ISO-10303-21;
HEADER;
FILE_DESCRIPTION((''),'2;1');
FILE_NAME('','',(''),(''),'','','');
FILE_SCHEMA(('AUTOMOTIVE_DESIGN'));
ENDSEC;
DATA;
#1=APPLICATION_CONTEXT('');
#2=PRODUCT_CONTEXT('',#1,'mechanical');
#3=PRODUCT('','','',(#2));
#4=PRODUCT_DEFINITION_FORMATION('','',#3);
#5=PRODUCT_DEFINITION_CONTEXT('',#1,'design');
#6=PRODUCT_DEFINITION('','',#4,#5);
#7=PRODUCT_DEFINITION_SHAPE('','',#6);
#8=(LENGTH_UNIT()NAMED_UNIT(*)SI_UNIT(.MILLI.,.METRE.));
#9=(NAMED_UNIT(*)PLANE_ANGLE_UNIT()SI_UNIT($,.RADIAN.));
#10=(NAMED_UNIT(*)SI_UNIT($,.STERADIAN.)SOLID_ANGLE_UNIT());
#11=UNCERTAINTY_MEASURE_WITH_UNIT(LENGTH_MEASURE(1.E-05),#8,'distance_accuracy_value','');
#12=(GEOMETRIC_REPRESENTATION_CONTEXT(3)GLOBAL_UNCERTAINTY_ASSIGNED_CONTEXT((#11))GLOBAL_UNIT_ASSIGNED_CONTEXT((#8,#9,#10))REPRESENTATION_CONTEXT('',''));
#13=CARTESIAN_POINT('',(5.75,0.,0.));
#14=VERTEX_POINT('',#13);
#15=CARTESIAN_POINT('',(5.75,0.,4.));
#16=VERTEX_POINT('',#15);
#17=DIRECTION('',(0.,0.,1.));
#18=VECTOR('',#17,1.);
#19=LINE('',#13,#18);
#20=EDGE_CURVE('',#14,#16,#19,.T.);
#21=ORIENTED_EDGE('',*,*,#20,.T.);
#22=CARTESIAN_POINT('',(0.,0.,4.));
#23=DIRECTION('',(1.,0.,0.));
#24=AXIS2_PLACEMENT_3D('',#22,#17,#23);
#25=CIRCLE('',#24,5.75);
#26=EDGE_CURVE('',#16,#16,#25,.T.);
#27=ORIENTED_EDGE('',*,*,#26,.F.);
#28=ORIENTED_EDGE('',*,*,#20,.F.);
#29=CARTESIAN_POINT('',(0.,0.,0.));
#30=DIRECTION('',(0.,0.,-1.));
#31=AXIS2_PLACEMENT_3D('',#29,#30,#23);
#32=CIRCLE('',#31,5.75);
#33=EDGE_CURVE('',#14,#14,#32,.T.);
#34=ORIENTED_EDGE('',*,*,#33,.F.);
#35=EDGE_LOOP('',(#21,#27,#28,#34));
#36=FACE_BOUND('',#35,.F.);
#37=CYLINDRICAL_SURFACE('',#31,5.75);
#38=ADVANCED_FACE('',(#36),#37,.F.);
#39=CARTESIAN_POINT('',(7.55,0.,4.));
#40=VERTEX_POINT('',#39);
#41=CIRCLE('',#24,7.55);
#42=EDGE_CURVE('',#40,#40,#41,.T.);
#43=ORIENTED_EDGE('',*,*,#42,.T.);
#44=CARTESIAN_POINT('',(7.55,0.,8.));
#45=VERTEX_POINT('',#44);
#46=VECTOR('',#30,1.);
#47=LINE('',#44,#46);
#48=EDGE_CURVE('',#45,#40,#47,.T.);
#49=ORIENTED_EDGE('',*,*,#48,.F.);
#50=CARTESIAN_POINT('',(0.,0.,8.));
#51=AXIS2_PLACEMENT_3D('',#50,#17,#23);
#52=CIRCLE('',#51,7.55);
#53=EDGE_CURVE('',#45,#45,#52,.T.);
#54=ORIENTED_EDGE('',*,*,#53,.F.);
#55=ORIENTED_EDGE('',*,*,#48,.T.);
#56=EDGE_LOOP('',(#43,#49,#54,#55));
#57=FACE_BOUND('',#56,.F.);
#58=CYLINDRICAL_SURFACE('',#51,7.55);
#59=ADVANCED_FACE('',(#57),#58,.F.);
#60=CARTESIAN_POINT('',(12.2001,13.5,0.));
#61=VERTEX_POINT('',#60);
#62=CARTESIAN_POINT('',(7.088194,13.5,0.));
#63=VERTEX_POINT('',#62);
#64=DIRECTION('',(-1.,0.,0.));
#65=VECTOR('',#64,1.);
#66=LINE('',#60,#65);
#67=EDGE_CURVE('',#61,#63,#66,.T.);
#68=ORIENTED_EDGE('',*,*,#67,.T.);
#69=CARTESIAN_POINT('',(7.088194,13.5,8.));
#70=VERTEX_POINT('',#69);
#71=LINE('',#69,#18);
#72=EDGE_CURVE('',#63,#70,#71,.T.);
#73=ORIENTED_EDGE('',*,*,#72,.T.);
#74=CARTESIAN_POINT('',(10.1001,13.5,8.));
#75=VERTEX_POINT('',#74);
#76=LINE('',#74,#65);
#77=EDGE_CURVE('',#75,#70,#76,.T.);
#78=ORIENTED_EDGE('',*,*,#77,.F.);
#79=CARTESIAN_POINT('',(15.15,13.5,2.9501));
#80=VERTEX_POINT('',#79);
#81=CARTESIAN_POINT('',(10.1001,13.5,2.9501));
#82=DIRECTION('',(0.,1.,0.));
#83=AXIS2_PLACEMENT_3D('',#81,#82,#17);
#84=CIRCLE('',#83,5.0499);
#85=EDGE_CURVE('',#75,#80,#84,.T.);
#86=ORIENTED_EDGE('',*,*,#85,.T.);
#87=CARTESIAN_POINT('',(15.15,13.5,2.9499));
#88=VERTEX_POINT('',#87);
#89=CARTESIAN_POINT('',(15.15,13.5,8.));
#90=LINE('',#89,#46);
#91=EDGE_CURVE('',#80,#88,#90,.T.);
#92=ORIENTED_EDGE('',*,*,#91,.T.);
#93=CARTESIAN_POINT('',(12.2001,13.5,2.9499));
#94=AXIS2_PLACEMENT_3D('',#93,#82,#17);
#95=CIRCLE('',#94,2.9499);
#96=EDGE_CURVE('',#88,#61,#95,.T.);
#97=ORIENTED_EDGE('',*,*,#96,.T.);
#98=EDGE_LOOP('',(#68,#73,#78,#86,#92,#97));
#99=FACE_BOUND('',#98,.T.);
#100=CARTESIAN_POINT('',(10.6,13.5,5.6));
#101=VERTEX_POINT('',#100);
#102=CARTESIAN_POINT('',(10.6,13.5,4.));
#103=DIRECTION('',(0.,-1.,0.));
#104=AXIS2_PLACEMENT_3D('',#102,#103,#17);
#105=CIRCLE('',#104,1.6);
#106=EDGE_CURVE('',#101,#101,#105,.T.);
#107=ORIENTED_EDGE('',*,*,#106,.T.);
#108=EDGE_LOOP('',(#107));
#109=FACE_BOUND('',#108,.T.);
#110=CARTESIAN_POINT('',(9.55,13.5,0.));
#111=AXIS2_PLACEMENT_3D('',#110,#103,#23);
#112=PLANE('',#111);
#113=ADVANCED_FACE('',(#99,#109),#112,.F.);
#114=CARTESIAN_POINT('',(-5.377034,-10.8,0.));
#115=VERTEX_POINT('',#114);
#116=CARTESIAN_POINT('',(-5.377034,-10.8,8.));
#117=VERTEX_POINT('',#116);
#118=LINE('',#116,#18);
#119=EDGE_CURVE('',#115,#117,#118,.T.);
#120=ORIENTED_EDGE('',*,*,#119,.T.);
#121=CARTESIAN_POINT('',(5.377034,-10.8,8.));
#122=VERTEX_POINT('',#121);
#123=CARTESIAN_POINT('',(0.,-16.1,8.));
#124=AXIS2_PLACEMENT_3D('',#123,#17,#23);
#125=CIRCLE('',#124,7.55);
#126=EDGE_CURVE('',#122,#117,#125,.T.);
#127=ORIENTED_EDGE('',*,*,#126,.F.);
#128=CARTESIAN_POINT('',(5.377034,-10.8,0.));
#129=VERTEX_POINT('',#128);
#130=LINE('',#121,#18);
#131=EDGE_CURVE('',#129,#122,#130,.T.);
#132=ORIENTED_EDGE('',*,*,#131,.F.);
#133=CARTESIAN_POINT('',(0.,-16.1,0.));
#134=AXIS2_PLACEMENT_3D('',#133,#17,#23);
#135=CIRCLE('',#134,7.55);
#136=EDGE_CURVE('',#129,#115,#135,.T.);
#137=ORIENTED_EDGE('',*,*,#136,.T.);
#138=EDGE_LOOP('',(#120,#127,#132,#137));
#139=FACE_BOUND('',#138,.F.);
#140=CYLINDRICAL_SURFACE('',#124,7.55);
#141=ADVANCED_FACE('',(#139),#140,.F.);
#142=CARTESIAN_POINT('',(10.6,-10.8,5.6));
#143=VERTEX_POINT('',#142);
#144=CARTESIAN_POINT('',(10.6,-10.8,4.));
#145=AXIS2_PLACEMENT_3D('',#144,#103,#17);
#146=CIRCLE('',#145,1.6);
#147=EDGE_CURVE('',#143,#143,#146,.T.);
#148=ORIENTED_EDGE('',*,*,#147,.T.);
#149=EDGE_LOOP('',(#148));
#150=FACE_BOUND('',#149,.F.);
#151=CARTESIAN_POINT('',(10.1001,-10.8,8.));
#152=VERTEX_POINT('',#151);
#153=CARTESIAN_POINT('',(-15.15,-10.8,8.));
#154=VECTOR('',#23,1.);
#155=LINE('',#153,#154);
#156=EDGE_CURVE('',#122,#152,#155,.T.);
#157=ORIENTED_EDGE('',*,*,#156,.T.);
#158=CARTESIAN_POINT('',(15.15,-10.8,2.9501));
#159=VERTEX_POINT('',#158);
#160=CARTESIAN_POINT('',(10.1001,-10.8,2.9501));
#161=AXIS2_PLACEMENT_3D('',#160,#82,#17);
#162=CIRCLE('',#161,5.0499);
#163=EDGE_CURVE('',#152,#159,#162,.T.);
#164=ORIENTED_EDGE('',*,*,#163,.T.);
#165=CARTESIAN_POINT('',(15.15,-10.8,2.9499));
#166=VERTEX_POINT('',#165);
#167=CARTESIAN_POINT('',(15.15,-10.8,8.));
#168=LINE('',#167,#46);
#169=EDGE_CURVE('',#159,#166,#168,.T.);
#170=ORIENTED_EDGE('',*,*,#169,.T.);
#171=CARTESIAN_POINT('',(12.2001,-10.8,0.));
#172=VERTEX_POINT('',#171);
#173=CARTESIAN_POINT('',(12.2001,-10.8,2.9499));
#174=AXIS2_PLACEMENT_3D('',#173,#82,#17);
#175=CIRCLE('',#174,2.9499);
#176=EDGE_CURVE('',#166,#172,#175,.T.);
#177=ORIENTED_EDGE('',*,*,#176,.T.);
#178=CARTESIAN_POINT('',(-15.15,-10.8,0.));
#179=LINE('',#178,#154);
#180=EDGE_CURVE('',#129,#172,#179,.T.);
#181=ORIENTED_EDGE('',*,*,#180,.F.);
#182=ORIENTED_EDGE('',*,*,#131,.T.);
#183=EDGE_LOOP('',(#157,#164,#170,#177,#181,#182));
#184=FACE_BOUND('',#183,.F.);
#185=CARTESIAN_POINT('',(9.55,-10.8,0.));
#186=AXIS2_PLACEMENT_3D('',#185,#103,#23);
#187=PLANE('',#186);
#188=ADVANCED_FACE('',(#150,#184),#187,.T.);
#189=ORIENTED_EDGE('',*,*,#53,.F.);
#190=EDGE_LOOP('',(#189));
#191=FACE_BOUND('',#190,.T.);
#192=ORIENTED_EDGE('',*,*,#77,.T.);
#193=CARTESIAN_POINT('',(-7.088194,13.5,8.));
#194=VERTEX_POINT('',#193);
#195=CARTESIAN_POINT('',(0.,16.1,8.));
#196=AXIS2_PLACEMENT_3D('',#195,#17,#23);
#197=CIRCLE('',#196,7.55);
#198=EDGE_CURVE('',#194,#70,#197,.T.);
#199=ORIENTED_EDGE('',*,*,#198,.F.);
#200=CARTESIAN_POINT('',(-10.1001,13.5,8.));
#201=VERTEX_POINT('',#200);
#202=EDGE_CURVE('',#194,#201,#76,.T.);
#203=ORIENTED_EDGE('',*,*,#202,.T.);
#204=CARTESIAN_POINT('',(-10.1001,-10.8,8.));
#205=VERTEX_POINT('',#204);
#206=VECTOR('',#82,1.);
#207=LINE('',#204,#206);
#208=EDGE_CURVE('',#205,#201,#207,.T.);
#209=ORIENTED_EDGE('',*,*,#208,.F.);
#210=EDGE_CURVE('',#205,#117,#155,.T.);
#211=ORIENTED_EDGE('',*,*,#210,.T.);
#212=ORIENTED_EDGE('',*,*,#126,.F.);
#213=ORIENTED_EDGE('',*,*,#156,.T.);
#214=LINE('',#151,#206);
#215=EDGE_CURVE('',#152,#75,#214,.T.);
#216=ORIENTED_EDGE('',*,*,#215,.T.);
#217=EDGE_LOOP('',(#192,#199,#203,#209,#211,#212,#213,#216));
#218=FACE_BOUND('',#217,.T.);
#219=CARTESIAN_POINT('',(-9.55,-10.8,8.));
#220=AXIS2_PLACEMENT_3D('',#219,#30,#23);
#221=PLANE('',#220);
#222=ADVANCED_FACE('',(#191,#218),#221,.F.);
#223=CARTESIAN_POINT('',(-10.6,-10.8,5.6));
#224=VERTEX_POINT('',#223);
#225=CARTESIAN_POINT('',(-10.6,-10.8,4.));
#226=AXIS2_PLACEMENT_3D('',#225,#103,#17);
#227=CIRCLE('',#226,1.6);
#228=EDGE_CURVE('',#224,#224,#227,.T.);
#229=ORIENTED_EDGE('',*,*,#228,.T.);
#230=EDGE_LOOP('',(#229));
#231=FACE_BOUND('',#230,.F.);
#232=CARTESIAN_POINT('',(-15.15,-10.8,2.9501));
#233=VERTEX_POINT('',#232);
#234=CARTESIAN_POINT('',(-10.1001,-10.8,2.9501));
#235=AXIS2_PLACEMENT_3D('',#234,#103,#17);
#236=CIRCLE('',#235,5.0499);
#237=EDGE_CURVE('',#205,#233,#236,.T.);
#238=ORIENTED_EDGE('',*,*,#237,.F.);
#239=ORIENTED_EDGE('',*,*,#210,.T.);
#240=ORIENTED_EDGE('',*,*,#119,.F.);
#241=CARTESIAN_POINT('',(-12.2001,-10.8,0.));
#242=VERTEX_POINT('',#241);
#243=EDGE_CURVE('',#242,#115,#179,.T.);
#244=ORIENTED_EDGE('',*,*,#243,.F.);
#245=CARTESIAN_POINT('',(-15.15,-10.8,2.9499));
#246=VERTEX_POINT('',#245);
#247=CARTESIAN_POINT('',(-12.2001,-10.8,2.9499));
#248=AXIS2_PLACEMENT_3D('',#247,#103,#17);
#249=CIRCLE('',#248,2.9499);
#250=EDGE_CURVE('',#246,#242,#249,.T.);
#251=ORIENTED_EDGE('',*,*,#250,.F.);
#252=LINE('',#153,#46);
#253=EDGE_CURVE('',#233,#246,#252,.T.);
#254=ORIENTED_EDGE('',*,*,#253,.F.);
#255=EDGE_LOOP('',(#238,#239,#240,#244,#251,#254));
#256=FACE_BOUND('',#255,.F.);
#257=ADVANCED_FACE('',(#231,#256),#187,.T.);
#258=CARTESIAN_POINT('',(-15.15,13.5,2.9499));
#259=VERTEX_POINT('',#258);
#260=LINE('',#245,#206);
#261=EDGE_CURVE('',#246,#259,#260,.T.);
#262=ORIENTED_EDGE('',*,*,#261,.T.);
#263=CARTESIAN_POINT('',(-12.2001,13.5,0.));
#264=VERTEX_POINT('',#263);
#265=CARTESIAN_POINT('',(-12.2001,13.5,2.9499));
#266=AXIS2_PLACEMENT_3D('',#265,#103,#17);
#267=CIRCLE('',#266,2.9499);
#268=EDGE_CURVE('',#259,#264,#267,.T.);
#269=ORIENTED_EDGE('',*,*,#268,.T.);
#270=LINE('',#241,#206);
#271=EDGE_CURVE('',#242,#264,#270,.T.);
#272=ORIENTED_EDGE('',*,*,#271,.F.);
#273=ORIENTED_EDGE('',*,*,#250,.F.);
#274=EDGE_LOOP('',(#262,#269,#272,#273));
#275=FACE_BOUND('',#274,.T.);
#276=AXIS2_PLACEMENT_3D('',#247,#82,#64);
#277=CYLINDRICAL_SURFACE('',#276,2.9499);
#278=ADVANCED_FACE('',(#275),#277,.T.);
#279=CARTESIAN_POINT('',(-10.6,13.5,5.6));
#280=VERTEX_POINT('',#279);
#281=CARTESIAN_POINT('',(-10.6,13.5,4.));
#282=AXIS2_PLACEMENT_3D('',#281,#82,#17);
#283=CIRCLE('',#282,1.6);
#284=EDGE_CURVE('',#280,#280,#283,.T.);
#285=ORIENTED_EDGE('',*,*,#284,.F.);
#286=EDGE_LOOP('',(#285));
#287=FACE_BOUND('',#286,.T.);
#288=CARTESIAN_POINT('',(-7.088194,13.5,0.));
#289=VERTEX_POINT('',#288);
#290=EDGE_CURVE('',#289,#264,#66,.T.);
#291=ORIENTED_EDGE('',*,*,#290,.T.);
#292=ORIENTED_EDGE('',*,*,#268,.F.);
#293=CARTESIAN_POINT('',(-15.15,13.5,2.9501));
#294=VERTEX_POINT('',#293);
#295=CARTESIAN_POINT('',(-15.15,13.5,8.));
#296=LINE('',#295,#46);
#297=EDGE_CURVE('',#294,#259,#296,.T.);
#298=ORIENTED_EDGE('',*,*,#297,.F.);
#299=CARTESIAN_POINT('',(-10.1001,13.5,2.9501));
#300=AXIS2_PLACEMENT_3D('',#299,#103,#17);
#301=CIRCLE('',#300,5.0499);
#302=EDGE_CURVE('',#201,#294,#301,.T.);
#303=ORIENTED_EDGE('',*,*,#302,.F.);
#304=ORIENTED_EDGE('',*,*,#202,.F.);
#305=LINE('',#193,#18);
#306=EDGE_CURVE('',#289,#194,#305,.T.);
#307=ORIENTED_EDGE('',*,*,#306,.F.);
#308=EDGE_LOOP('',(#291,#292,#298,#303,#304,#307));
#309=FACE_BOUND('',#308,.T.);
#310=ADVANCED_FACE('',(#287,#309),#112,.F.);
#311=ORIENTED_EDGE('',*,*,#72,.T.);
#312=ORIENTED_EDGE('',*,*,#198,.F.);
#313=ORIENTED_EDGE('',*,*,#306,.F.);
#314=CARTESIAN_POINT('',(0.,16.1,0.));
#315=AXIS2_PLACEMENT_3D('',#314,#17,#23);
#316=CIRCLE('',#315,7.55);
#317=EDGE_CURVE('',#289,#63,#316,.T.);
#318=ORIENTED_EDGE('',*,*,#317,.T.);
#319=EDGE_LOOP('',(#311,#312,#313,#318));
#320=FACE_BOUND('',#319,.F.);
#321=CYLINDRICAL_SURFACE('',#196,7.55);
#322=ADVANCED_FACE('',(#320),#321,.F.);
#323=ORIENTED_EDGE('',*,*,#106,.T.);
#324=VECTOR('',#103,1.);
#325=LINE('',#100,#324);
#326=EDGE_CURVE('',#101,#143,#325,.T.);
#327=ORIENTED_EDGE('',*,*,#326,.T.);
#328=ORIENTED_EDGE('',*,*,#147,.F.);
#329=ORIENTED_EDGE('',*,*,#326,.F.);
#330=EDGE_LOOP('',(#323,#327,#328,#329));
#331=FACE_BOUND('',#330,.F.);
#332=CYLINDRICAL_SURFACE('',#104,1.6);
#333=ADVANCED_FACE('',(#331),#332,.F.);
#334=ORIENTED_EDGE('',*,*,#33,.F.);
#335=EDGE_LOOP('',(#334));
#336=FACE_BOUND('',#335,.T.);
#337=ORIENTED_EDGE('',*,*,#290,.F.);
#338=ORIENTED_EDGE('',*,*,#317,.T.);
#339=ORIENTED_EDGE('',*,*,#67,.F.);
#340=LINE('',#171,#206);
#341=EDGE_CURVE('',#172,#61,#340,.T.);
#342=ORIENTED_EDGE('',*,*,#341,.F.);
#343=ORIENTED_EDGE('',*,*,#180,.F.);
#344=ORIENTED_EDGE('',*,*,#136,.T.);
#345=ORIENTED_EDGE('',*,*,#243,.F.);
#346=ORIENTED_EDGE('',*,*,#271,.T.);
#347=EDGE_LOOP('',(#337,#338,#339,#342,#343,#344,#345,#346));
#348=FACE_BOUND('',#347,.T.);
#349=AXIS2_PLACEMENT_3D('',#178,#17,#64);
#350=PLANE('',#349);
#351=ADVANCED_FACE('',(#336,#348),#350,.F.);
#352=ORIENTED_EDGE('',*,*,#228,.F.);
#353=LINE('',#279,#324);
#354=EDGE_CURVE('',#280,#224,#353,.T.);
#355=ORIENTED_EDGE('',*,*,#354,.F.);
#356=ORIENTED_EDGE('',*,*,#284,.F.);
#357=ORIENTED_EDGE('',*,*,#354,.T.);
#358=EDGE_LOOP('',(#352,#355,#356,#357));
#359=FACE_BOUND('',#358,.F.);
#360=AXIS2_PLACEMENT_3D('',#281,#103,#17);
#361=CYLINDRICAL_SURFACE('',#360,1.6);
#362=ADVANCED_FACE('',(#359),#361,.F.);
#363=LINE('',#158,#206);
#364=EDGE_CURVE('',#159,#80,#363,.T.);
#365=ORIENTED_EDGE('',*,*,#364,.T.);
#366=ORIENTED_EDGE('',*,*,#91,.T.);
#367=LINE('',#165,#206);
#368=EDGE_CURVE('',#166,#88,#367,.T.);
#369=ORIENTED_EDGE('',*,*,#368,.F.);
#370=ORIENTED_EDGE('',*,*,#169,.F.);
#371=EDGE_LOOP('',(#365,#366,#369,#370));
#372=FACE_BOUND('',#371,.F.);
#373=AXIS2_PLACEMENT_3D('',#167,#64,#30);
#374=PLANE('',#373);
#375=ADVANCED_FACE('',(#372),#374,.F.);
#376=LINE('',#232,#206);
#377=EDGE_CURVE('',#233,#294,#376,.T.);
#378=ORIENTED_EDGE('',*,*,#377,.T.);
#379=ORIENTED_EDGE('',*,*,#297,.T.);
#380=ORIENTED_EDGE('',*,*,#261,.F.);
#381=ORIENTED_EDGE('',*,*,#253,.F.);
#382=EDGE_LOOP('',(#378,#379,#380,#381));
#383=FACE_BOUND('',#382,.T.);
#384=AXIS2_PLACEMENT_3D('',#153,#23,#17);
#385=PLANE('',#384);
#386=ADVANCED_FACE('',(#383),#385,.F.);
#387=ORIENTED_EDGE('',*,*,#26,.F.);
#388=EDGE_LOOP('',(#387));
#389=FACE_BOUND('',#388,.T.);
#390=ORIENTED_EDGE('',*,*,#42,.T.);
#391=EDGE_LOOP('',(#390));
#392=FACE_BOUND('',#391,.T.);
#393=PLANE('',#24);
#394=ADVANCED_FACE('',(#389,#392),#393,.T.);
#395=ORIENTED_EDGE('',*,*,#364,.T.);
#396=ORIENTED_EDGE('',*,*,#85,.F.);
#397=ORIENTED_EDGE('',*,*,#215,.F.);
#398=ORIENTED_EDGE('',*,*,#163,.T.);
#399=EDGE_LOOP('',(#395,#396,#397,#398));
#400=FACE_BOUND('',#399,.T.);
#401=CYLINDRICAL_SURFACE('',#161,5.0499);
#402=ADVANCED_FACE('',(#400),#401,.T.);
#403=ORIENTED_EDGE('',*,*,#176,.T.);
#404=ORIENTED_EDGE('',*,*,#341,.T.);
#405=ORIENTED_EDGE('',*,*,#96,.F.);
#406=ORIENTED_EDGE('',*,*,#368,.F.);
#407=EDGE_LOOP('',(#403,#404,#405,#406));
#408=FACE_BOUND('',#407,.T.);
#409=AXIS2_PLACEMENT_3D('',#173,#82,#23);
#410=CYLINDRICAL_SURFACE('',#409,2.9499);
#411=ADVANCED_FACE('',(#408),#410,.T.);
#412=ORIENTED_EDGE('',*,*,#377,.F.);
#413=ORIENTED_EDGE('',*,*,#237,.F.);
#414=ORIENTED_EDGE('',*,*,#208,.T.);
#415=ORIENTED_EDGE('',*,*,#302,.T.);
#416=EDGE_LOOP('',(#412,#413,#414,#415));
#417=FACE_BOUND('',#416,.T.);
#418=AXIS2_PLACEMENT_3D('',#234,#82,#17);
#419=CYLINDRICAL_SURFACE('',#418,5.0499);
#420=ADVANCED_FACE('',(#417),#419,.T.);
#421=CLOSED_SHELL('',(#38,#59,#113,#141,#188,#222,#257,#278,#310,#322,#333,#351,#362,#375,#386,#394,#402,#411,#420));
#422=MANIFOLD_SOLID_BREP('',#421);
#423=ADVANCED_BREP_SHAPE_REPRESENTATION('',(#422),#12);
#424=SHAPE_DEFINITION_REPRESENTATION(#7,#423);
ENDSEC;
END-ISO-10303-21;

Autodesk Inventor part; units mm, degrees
ref_plane "YZ Plane" through (0, 0, 0) normal (1, 0, 0) x (0, 1, 0)
ref_plane "XZ Plane" through (0, 0, 0) normal (0, 1, 0) x (-1, 0, 0)
sketch "Эскиз1" plane through (0, 0, 0) normal (0, 0, 1) x (1, 0, 0)
  circle A0 centre (0, 0) radius 5.75
  circle A1 centre (0, 0) radius 9.55
  line L0 (9.55, 13.5) -> (-9.55, 13.5)
  line L1 (-9.55, 13.5) -> (-9.55, 0)
  line L2 (-9.55, 0) -> (9.55, 0)
  line L3 (9.55, 0) -> (9.55, 13.5)
  line L4 (9.55, 0) -> (-9.55, 0)
  line L5 (-9.55, 0) -> (-9.55, -10.8)
  line L6 (-9.55, -10.8) -> (9.55, -10.8)
  line L7 (9.55, -10.8) -> (9.55, 0)
  point P0 (9.55, 0)
  point P1 (0, 9.55)
  point P2 (-9.55, 0)
  point P3 (9.55, 0)
  point P4 (-9.55, 0)
  dimension "d0" = 11.5
  dimension "d1" = 19.1
  dimension "d64" = 10.8
  dimension "d85" = 13.5
extrude "Выдавливание1" add sketch "Эскиз1" along normal blind 8 contours L2 A1 A0 | A0 L2 A1 | L7 L6 L5 A1 | A1 L1 L0 L3
sketch "Эскиз15" plane through (0, 0, 8) normal (0, 0, 1) x (1, 0, 0)
  circle A0 centre (0, 0) radius 5.75 projected
  circle A1 centre (0, 0) radius 7.55
  dimension "d67" = 15.1
extrude "Выдавливание9" cut sketch "Эскиз15" against normal blind 4
ref_plane "РабПлоскость6" through (0, -10.8, 0) normal (1, 0, 0) x (0, 0, -1)
sketch "Эскиз16" plane through (-9.55, -10.8, 0) normal (0, -1, 0) x (1, 0, 0)
  line L0 (0, 8) -> (19.1, 8) projected
  line L1 (19.1, 8) -> (24.7, 8)
  line L2 (24.7, 8) -> (24.7, 0)
  line L3 (24.7, 0) -> (19.1, 0)
  line L4 (19.1, 0) -> (19.1, 8)
  point P0 (9.55, 0)
  dimension "d70" = 5.6
  dimension "d71" = 8
extrude "Выдавливание10" add sketch "Эскиз16" against normal up to surface (24.3 mm away)
sketch "Эскиз17" plane through (-9.55, 13.5, 0) normal (0, 1, 0) x (1, 0, 0)
  line L0 (24.7, 0) -> (24.7, -8) projected
  line L1 (24.7, -4) -> (20.15, -4)
  point P0 (9.55, 0)
  dimension "d82" = 4.55
hole "Отверстие4" at (10.6, 13.5, 4) direction (0, -1, 0) diameter 3.2 end through all
fillet "Сопряжение5" radius 5.05 1 edges at (15.15, 1.35, 8)
fillet "Сопряжение5" radius 2.95 1 edges at (15.15, 1.35, 0)
mirror "Зеркальное отражение5" about plane through (0, -10.8, 0) normal (1, 0, 0) of "Сопряжение5", "Отверстие4", "Выдавливание10"
sketch "Эскиз18" plane through (0, 0, 8) normal (0, 0, 1) x (1, 0, 0)
  circle A0 centre (0, 0) radius 7.55 projected
  circle A1 centre (0, 16.1) radius 7.55
  circle A2 centre (0, -16.1) radius 7.55
  dimension "d86" = 16.1
  dimension "d87" = 16.1
extrude "Выдавливание11" cut sketch "Эскиз18" against normal through all contours A1 | A2
ref_plane "РабПлоскость7" through (0, -10.8, 0) normal (1, 0, 0) x (0, 0, -1)
equation "\"d87\" = d86"
properties part number "Крепление дифференциала"
